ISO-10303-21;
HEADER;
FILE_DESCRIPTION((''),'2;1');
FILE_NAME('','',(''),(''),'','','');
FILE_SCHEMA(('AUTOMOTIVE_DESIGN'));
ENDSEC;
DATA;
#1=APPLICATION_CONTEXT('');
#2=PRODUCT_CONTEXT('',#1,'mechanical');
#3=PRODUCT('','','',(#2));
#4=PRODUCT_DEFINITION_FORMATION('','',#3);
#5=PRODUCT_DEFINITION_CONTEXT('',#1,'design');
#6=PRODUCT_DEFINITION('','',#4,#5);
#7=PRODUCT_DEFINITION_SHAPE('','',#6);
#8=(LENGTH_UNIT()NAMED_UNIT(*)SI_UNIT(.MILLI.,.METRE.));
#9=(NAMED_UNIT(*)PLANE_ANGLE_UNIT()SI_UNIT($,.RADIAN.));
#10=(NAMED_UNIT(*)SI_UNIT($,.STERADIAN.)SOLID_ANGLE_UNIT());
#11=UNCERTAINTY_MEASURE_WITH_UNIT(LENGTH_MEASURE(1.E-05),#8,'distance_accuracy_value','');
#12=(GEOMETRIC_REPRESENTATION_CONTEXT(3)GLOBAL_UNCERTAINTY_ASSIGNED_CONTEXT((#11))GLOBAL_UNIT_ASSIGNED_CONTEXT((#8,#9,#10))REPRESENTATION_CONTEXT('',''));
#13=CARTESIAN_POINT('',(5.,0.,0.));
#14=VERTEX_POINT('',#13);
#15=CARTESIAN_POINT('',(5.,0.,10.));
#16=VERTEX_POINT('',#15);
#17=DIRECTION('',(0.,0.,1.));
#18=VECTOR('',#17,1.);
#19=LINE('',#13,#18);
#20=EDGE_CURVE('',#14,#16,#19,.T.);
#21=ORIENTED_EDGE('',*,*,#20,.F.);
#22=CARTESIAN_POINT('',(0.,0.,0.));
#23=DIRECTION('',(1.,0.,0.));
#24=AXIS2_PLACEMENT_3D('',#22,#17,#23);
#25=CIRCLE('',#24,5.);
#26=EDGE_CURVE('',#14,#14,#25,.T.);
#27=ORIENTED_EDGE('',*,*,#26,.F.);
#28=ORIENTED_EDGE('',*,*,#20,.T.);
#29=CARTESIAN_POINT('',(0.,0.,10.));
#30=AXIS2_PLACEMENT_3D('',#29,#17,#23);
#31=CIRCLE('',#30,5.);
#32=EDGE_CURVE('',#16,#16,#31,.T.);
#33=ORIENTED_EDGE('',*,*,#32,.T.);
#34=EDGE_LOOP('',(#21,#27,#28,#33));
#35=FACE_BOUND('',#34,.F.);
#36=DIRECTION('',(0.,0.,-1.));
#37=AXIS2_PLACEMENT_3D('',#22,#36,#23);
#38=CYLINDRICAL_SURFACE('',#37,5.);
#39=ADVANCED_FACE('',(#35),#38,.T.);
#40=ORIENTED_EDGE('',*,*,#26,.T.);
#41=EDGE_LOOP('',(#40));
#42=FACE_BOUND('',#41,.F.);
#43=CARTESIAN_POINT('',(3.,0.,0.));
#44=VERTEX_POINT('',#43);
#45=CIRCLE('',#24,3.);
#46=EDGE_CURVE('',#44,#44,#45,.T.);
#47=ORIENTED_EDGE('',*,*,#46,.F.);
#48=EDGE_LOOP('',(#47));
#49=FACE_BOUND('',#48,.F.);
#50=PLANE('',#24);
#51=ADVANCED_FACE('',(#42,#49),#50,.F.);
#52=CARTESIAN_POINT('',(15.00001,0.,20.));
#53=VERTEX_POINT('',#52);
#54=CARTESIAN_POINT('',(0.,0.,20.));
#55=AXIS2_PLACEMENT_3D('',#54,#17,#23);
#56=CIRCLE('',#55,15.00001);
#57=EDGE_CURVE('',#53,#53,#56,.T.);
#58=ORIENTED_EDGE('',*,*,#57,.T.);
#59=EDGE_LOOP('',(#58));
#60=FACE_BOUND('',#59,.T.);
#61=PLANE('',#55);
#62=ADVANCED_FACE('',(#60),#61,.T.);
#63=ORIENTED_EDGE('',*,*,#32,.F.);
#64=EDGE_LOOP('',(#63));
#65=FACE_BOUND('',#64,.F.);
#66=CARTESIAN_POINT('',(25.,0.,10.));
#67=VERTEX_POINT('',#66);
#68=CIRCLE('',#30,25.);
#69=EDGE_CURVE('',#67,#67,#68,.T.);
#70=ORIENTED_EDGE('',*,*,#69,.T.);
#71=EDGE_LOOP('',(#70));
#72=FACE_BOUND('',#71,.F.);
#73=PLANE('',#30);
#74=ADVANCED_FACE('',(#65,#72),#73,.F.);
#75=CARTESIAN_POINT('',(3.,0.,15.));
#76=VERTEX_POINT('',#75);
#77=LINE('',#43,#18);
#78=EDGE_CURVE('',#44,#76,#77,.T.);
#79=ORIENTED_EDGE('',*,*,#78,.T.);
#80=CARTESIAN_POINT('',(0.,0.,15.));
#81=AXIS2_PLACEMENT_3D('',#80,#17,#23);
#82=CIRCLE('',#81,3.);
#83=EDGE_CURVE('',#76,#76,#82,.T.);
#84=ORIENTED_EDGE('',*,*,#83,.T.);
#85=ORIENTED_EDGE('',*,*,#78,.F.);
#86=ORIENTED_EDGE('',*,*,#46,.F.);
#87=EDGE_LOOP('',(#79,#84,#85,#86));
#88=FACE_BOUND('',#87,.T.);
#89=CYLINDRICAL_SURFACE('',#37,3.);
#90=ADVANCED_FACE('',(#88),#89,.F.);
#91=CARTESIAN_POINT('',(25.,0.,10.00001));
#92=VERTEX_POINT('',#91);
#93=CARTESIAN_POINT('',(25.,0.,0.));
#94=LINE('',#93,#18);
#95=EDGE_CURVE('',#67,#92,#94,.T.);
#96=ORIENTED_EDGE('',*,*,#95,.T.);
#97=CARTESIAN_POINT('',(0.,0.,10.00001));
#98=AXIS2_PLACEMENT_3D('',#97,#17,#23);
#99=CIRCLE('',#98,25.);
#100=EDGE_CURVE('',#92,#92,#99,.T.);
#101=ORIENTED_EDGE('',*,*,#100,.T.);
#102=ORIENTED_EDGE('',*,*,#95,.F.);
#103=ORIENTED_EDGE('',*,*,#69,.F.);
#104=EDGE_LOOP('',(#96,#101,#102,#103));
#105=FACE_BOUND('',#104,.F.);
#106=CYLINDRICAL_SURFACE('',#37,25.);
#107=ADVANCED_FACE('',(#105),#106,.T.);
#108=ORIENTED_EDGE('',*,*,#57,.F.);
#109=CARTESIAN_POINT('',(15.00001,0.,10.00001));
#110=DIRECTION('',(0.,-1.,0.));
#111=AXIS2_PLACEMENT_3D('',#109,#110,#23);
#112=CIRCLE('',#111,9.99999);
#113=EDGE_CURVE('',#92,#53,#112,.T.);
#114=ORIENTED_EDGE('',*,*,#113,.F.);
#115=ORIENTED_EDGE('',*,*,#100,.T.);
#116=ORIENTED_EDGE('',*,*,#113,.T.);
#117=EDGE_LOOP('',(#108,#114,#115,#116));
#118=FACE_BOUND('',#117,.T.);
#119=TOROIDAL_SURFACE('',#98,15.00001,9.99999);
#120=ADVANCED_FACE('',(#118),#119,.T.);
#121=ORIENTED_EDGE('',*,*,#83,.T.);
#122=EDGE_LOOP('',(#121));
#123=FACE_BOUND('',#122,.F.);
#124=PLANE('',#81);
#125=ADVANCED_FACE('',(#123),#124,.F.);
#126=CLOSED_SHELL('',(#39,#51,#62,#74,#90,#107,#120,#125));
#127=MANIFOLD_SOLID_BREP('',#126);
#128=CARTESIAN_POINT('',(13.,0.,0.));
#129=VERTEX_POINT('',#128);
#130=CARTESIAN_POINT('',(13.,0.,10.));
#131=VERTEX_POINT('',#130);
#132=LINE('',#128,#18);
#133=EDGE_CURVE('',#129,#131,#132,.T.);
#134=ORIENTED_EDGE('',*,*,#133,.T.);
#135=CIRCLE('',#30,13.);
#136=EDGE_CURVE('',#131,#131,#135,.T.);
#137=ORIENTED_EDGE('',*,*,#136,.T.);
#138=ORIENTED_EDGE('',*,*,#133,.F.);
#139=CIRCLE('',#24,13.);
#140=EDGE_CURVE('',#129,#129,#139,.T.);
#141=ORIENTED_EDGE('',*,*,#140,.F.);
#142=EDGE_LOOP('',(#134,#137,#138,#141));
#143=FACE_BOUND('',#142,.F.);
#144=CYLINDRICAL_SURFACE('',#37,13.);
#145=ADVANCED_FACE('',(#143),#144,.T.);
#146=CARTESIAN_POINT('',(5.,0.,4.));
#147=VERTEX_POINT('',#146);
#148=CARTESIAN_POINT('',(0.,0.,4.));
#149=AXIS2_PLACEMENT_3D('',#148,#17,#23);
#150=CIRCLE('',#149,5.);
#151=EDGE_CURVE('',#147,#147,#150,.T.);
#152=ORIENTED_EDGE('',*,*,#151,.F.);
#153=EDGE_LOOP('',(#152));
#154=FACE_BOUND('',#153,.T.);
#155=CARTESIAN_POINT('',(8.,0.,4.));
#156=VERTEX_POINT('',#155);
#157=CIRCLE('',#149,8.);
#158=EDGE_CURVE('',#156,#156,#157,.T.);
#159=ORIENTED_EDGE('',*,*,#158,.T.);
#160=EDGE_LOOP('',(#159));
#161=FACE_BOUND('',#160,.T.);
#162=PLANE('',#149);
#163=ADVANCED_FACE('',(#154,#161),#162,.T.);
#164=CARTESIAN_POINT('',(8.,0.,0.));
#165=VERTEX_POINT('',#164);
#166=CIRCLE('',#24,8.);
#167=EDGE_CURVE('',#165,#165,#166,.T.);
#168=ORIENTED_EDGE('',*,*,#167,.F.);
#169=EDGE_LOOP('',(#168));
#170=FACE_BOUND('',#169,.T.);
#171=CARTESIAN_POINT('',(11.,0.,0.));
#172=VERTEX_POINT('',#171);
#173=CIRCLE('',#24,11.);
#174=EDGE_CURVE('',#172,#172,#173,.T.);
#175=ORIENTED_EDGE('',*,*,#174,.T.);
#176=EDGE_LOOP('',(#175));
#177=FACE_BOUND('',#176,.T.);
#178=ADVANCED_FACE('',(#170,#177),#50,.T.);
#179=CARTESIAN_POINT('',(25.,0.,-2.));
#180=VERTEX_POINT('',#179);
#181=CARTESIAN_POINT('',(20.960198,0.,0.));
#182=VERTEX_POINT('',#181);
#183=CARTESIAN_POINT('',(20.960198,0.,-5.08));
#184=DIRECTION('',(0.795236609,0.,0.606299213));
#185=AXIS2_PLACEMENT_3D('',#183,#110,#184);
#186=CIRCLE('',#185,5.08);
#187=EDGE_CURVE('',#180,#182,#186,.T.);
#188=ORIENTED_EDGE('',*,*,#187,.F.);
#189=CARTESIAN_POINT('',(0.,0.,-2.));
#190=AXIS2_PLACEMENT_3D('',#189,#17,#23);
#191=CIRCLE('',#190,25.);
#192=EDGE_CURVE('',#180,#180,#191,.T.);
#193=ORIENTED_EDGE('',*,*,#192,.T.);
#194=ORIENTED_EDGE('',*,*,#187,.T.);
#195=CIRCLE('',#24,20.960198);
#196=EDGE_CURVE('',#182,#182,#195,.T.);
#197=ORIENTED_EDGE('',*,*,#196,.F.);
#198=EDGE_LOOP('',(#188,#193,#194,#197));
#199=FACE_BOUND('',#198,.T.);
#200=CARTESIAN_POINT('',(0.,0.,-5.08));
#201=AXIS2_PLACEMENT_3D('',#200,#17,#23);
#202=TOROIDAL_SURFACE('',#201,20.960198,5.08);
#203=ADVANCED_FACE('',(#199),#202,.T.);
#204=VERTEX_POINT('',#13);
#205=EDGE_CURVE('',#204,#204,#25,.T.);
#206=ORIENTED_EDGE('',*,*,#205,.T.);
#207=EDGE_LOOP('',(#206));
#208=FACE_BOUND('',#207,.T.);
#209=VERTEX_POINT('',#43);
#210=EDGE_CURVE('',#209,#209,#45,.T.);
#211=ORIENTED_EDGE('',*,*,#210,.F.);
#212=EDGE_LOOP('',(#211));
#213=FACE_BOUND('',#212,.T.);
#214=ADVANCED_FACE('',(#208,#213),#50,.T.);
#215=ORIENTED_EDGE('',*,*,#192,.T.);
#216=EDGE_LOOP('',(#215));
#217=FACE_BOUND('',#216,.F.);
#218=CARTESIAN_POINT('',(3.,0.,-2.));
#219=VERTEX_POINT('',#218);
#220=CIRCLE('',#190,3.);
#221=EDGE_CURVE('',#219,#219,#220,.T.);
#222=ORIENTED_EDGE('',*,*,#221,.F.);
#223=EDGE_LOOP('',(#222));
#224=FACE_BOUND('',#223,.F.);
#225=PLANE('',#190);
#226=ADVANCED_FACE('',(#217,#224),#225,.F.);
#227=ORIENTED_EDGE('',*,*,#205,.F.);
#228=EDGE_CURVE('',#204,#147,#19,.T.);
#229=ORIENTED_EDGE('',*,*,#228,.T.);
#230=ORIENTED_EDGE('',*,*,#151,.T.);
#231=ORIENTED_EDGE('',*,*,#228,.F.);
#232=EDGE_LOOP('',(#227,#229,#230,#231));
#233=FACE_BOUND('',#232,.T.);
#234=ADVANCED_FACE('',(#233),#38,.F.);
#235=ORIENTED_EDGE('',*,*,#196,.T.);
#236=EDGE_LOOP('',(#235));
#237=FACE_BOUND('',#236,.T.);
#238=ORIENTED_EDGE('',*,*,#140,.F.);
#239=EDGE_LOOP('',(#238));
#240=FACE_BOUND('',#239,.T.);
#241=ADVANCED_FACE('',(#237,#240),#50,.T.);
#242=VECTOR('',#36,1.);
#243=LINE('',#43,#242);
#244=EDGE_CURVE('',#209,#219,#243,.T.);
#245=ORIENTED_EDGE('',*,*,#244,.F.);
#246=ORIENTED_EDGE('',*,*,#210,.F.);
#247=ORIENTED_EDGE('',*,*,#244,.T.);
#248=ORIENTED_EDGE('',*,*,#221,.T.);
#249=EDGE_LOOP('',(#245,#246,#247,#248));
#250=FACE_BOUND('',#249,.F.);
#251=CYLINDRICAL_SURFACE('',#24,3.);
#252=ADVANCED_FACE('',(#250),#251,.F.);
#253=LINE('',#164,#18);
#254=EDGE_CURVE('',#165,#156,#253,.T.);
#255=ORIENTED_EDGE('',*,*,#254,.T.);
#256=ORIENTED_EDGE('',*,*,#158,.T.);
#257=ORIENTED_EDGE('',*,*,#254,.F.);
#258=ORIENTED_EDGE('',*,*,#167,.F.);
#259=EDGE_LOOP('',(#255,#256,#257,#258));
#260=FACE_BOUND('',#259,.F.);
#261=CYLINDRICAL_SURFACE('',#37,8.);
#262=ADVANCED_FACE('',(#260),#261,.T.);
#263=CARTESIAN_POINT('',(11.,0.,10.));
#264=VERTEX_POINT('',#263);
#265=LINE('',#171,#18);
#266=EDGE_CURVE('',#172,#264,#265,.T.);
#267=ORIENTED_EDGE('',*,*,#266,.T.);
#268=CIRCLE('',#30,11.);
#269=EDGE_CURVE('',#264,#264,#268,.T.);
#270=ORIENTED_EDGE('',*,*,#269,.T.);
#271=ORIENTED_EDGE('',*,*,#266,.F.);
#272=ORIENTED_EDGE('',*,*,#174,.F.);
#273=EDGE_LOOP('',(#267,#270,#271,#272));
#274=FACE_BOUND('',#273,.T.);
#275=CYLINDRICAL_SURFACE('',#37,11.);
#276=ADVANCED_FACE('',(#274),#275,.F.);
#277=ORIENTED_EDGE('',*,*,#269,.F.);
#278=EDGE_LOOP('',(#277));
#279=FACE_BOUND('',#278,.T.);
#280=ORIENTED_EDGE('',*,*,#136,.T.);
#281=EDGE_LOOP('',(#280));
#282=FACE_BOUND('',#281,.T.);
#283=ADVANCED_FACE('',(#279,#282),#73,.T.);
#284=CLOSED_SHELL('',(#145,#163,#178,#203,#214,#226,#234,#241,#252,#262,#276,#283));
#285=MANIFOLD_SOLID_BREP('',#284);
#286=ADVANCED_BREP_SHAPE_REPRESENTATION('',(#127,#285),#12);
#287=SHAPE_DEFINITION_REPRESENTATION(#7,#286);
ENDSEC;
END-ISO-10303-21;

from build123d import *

# Parameters (mm, degrees)
F0_R     = 25
F0_R_2   = 13
F0_R_3   = 11
F0_R_4   = 8
F0_R_5   = 5
F0_R_6   = 3
F1_DEPTH = 2
F2_DEPTH = 10
F3_DEPTH = 4
F5_DEPTH = 20
F6_DEPTH = 20
F7_DEPTH = 10
F8_R     = 9.99999
F9_START = 15
F9_DEPTH = 5


# Not quite as in the source:
# - a fillet or chamfer that OpenCascade refuses, or shapes differently, is made with other operations: its cross-section is extruded or revolved along the edge and cut away or added
# - a fillet or chamfer is up to 0.001 mm smaller than in the source, because OpenCascade refuses the exact size


with BuildPart() as f1:
    # F0 (on Top) → F1 (new body)
    with BuildSketch(Plane.XY):
        Circle(F0_R)
        Circle(F0_R_2, mode=Mode.SUBTRACT)
        Circle(F0_R_2)
        Circle(F0_R_3, mode=Mode.SUBTRACT)
        Circle(F0_R_3)
        Circle(F0_R_4, mode=Mode.SUBTRACT)
        Circle(F0_R_4)
        Circle(F0_R_5, mode=Mode.SUBTRACT)
        Circle(F0_R_5)
        Circle(F0_R_6, mode=Mode.SUBTRACT)
    extrude(amount=-F1_DEPTH)

    # F0 (on Top) → F2 (join)
    with BuildSketch(Plane.XY):
        Circle(F0_R_2)
        Circle(F0_R_3, mode=Mode.SUBTRACT)
    extrude(amount=F2_DEPTH)

    # F0 (on Top) → F3 (join)
    with BuildSketch(Plane.XY):
        Circle(F0_R_4)
        Circle(F0_R_5, mode=Mode.SUBTRACT)
    extrude(amount=F3_DEPTH)

    # F4: fillet of radius 5.08 on 1 edges, made by hand

    # F4_s1 → F4_t2 (revolve, cut)
    with BuildSketch(Plane.XZ):
        with BuildLine():
            ThreePointArc((25, -2), (23.2140835586, -0.5273743839), (20.9601980247, 0))
            Line((20.9601980247, 0), (25, 0))
            Line((25, 0), (25, -2))
        make_face()
    revolve(axis=Axis((0, 0, 0), (0, 0, 1)), mode=Mode.SUBTRACT)


with BuildPart() as f5:
    # F0 (on Top) → F5 (new body)
    with BuildSketch(Plane.XY):
        Circle(F0_R_5)
        Circle(F0_R_6, mode=Mode.SUBTRACT)
    extrude(amount=F5_DEPTH)

    # F0 (on Top) → F6 (join)
    with BuildSketch(Plane.XY):
        Circle(F0_R)
        Circle(F0_R_2, mode=Mode.SUBTRACT)
        Circle(F0_R_2)
        Circle(F0_R_3, mode=Mode.SUBTRACT)
        Circle(F0_R_3)
        Circle(F0_R_4, mode=Mode.SUBTRACT)
        Circle(F0_R_4)
        Circle(F0_R_5, mode=Mode.SUBTRACT)
    extrude(amount=F6_DEPTH)

    # F0 (on Top) → F7 (cut)
    with BuildSketch(Plane.XY):
        Circle(F0_R)
        Circle(F0_R_2, mode=Mode.SUBTRACT)
        Circle(F0_R_2)
        Circle(F0_R_3, mode=Mode.SUBTRACT)
        Circle(F0_R_3)
        Circle(F0_R_4, mode=Mode.SUBTRACT)
        Circle(F0_R_4)
        Circle(F0_R_5, mode=Mode.SUBTRACT)
    extrude(amount=F7_DEPTH, mode=Mode.SUBTRACT)

    # F8 (radius 10 in the source; OpenCascade refuses exactly that, so slightly less here)
    f8_edges = [f5.edges().sort_by_distance(p)[0] for p in [
        (-25, 0, 20),
    ]]
    fillet(f8_edges, radius=F8_R)

    # F0 (on Top) → F9 (join)
    with BuildSketch(Plane.XY.offset(F9_START)):
        Circle(F0_R_6)
    extrude(amount=F9_DEPTH)


solid = Compound([f1.part, f5.part])
